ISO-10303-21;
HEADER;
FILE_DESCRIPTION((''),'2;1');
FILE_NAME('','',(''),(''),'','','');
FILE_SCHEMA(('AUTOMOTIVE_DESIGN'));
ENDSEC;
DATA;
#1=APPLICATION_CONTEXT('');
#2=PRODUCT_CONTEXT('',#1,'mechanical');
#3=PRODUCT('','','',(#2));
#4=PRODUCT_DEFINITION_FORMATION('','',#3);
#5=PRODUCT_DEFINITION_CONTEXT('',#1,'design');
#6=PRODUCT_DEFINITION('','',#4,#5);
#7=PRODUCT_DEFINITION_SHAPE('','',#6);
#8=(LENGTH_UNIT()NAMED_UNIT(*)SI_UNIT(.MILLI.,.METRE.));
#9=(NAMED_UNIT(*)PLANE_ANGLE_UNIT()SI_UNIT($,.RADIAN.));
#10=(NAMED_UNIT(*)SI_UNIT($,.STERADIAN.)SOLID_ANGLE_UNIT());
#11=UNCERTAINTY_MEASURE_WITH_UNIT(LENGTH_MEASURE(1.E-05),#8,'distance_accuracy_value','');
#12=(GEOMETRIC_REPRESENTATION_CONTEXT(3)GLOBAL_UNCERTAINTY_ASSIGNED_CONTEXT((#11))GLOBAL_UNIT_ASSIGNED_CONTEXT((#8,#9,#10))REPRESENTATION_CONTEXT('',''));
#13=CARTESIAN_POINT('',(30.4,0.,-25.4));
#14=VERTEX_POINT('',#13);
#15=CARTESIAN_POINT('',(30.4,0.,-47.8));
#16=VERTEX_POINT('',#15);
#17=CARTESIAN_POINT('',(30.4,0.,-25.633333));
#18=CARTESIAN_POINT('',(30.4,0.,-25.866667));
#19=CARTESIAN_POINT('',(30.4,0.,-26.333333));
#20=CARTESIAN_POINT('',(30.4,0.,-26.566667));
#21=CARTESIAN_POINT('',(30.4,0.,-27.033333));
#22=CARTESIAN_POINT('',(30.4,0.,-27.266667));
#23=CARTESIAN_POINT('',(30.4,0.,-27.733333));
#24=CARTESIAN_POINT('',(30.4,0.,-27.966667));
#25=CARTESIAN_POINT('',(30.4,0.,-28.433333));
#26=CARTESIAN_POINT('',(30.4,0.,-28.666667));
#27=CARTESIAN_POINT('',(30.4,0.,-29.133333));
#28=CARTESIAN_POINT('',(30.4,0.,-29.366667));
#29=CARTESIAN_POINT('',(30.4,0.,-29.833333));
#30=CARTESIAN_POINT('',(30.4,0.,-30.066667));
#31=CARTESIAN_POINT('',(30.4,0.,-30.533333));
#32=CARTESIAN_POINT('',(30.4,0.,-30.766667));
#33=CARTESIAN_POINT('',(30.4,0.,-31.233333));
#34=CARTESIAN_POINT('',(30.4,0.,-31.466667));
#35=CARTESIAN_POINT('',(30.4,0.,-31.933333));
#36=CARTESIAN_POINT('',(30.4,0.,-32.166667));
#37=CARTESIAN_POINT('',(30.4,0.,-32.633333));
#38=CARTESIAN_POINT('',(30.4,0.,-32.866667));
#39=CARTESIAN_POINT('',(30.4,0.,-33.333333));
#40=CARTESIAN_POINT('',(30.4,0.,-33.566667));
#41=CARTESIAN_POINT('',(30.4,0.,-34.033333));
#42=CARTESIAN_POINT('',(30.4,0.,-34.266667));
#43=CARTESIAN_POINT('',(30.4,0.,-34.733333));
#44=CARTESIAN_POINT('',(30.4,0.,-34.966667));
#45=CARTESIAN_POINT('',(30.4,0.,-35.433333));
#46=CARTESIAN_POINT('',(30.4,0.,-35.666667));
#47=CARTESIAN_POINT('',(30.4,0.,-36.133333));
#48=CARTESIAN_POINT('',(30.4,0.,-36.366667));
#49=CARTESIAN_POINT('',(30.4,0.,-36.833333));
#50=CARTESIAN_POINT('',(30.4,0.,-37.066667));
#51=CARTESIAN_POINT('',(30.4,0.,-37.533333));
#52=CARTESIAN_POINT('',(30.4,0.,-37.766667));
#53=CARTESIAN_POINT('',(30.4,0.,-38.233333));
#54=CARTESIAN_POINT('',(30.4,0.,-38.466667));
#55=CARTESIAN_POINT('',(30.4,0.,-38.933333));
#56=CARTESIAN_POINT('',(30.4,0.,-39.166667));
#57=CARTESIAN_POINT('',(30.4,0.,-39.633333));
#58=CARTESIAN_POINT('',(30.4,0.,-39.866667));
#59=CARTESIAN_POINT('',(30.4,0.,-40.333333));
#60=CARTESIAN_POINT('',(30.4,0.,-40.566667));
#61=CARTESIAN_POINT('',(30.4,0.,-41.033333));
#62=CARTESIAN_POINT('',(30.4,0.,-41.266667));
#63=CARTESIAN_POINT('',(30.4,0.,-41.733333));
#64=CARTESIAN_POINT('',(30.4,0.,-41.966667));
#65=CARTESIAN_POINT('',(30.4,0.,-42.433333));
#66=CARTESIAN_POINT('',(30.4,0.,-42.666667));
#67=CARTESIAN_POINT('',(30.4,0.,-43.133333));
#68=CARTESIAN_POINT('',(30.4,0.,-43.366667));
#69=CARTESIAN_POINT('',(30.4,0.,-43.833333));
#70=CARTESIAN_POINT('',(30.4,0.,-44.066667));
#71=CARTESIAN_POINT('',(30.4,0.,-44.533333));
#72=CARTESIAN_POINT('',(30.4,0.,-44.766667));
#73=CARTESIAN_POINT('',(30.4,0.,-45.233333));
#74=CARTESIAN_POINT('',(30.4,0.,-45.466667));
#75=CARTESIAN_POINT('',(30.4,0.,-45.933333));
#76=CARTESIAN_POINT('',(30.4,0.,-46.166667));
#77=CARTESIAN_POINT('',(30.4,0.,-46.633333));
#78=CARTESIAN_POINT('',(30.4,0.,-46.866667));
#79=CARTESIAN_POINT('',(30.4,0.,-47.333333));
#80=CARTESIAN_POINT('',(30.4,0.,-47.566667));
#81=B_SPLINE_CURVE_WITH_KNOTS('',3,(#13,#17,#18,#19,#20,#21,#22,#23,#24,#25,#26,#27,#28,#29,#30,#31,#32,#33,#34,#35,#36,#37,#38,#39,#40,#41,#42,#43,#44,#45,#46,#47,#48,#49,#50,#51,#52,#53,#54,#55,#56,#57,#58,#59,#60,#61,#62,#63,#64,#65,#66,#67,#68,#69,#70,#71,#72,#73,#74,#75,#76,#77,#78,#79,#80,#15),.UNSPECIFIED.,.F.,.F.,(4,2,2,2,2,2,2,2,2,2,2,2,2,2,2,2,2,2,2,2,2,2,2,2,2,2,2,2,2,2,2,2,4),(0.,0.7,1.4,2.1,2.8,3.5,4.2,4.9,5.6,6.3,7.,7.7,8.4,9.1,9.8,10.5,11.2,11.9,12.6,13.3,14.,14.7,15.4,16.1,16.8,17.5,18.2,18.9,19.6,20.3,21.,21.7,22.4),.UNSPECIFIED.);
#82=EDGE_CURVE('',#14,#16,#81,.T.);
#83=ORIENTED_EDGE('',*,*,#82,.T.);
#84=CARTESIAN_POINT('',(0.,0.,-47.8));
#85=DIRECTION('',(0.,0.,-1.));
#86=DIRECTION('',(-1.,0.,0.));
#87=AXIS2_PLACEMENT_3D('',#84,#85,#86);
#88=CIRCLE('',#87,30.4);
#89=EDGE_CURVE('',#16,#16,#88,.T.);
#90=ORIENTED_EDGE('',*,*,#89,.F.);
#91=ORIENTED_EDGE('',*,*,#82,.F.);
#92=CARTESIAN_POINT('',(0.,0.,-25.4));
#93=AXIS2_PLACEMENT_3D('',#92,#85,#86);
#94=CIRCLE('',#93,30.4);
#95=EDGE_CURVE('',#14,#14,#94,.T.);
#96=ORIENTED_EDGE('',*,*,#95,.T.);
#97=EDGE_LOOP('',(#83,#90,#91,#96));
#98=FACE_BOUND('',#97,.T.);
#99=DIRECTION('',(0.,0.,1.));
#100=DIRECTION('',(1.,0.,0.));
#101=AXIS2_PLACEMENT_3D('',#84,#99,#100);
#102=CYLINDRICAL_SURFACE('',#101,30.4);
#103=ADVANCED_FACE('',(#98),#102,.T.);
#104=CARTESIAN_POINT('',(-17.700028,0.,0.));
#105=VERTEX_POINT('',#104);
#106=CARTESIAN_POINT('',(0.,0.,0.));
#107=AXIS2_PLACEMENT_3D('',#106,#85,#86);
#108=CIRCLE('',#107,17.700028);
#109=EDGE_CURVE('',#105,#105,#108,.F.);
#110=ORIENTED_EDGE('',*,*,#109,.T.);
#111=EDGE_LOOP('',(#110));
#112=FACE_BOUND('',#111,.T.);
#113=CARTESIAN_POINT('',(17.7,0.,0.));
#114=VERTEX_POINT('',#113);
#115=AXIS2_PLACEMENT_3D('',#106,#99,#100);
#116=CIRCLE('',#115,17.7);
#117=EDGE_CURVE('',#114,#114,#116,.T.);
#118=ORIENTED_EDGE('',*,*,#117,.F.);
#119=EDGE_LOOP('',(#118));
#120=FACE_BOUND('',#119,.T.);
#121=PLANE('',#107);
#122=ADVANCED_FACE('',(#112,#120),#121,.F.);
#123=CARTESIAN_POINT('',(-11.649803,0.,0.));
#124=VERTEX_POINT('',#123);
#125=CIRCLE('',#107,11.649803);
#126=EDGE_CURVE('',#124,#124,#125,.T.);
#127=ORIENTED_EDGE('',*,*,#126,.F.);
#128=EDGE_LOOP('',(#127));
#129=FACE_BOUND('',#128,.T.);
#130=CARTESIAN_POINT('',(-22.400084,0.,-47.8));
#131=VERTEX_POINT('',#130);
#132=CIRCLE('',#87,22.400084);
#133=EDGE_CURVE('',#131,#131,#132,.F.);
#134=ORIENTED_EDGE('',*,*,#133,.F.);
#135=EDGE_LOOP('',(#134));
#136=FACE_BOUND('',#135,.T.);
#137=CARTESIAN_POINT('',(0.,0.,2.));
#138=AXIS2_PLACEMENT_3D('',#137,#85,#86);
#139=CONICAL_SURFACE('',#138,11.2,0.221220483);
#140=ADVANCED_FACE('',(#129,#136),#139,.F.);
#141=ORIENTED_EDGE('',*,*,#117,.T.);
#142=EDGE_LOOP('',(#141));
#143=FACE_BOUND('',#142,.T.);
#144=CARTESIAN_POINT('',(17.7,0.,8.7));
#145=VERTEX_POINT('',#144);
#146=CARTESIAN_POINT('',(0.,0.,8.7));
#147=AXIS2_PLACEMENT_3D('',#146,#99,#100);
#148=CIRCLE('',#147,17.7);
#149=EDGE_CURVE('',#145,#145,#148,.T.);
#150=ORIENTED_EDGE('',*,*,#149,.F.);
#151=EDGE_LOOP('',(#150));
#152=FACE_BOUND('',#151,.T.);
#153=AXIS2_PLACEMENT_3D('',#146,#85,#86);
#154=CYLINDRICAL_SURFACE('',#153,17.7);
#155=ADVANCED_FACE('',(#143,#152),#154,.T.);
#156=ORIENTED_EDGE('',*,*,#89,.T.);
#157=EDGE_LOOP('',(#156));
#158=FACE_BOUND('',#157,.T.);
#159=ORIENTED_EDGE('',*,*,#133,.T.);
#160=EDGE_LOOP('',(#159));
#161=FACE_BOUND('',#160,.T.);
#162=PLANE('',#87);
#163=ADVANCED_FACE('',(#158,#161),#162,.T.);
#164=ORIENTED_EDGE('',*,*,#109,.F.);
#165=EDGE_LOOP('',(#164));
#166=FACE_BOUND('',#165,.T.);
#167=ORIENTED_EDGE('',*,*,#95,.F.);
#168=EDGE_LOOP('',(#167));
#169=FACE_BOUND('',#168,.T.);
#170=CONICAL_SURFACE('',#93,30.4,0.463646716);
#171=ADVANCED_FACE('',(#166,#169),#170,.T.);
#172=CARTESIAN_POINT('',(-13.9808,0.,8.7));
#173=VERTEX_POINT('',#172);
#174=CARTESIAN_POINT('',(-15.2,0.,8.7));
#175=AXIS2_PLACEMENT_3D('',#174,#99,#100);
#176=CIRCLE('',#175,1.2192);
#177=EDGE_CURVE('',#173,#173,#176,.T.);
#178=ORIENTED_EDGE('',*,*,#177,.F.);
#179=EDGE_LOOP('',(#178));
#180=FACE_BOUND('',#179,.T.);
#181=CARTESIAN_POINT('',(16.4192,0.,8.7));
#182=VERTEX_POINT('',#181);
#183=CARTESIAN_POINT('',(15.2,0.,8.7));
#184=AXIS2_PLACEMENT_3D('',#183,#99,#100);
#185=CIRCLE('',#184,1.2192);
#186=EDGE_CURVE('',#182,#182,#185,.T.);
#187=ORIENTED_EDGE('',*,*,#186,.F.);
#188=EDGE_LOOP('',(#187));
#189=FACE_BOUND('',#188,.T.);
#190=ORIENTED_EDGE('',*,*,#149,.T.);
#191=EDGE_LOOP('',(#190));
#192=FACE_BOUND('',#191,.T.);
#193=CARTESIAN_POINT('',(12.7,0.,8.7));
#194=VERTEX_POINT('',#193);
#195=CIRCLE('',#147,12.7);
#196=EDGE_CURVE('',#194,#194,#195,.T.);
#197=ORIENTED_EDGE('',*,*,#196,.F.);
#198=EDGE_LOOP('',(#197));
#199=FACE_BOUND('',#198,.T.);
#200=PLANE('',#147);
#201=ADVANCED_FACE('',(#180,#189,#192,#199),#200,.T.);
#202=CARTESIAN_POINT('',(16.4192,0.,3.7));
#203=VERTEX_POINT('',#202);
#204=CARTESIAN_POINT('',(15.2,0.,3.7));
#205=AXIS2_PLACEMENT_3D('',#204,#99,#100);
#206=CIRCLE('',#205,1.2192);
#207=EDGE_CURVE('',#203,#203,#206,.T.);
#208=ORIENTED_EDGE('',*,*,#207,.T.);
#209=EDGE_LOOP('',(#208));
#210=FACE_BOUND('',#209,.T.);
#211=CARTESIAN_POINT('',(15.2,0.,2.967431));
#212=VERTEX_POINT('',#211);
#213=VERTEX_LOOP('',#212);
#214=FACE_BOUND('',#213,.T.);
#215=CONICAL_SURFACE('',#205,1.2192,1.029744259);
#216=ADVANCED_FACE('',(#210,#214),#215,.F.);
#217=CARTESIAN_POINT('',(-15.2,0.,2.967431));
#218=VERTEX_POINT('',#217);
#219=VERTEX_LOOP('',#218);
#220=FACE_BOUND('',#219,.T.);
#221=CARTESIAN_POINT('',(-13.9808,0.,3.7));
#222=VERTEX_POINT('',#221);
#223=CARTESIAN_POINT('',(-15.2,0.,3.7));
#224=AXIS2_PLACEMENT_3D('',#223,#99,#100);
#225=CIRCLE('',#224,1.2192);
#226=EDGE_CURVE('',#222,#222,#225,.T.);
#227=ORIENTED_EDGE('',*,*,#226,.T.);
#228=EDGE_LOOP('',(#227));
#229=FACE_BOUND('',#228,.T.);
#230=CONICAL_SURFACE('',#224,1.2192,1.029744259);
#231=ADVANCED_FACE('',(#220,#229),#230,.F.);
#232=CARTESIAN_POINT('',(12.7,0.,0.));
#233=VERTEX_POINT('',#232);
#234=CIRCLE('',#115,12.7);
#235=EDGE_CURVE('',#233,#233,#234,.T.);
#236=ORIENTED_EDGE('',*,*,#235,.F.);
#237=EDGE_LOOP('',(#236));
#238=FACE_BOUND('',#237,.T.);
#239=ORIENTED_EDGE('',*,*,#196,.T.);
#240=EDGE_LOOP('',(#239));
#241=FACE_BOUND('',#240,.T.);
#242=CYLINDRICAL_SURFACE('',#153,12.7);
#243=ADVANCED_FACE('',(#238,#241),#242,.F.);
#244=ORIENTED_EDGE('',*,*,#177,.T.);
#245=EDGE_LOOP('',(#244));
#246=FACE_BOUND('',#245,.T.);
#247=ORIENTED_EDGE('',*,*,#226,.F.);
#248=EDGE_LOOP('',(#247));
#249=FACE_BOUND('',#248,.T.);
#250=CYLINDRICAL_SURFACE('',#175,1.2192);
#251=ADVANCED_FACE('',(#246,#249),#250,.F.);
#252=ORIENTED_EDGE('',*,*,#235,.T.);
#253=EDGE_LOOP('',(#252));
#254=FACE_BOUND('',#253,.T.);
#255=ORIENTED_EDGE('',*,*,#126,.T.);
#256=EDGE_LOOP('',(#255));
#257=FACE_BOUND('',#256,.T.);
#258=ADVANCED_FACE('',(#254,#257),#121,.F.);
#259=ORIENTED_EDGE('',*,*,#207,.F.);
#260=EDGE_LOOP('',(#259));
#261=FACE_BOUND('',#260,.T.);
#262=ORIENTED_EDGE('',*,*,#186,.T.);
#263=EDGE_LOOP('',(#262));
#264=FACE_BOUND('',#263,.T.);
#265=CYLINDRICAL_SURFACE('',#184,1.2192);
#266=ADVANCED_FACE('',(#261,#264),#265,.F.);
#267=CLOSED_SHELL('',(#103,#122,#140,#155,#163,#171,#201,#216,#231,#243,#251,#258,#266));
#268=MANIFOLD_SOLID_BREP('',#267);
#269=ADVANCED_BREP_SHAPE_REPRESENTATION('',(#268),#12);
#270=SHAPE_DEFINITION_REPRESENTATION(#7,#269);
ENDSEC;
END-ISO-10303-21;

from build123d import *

# Parameters (mm, degrees)
ESQUISSE1_R                     = 17.7
ESQUISSE1_R_2                   = 12.7
BOSS_EXTRU_1_DEPTH              = 8.7
ESQUISSE2_R                     = 30.4
ESQUISSE2_R_2                   = 11.2
BOSS_EXTRU_2_DEPTH              = 47.8
CHANFREIN1_SIZE                 = 25.4
CHANFREIN1_SIZE2                = 12.699971641
CHANFREIN3_SIZE                 = 11.200084029
CHANFREIN3_SIZE_2               = 49.8
F_41_0_096_DIAMETER_HOLE1_D     = 2.4384
F_41_0_096_DIAMETER_HOLE1_DEPTH = 5
F_41_0_096_DIAMETER_HOLE1_TIP   = 0.732569267


with BuildPart() as part:
    # Esquisse1 → Boss.-Extru.1 (new body)
    with BuildSketch(Plane.XY):
        Circle(ESQUISSE1_R)
        Circle(ESQUISSE1_R_2, mode=Mode.SUBTRACT)
    extrude(amount=BOSS_EXTRU_1_DEPTH)

    # Esquisse2 → Boss.-Extru.2 (add)
    with BuildSketch(Plane(origin=(0, 0, 0), x_dir=(-1, 0, 0), z_dir=(0, 0, -1))):
        with Locations(Location((0, 0, 0), (0, 0, 180))):
            Circle(ESQUISSE2_R)
        with Locations(Location((0, 0, 0), (0, 0, 180))):
            Circle(ESQUISSE2_R_2, mode=Mode.SUBTRACT)
    extrude(amount=BOSS_EXTRU_2_DEPTH)

    # Chanfrein1
    chanfrein1_edges = [part.edges().sort_by_distance(p)[0] for p in [
        (-30.4, 0, 0),
    ]]
    chanfrein1_side = [part.faces().sort_by_distance(p)[0] for p in [
        (-30.4, 0, -23.9),
    ]]
    chamfer(chanfrein1_edges, length=CHANFREIN1_SIZE, length2=CHANFREIN1_SIZE2, reference=chanfrein1_side[0])

    # Chanfrein3
    # the kernel refuses this chamfer: 49.8, 11.200084029 mm, written as the material it takes off along each edge
    with BuildSketch(Plane(origin=(0, 0, -47.8), x_dir=(1, 0, 0), z_dir=(0, 1, 0))) as chanfrein3_piece_1:
        Polygon((11.2 + CHANFREIN3_SIZE, 0), (11.2, -CHANFREIN3_SIZE_2), (11.2, 0), align=None)
    revolve(axis=Axis((0, 0, -47.8), (0, 0, -1)), mode=Mode.SUBTRACT)

    # #41 (0.096) Diameter Hole1
    with Locations(Plane.XY.offset(8.7)):
        with Locations((-15.2, 0), (15.2, 0)):
            Hole(F_41_0_096_DIAMETER_HOLE1_D / 2, depth=F_41_0_096_DIAMETER_HOLE1_DEPTH)
            with Locations((0, 0, -(F_41_0_096_DIAMETER_HOLE1_DEPTH + F_41_0_096_DIAMETER_HOLE1_TIP / 2))):  # 118° drill point
                Cone(0, F_41_0_096_DIAMETER_HOLE1_D / 2, F_41_0_096_DIAMETER_HOLE1_TIP, mode=Mode.SUBTRACT)


solid = part.part
